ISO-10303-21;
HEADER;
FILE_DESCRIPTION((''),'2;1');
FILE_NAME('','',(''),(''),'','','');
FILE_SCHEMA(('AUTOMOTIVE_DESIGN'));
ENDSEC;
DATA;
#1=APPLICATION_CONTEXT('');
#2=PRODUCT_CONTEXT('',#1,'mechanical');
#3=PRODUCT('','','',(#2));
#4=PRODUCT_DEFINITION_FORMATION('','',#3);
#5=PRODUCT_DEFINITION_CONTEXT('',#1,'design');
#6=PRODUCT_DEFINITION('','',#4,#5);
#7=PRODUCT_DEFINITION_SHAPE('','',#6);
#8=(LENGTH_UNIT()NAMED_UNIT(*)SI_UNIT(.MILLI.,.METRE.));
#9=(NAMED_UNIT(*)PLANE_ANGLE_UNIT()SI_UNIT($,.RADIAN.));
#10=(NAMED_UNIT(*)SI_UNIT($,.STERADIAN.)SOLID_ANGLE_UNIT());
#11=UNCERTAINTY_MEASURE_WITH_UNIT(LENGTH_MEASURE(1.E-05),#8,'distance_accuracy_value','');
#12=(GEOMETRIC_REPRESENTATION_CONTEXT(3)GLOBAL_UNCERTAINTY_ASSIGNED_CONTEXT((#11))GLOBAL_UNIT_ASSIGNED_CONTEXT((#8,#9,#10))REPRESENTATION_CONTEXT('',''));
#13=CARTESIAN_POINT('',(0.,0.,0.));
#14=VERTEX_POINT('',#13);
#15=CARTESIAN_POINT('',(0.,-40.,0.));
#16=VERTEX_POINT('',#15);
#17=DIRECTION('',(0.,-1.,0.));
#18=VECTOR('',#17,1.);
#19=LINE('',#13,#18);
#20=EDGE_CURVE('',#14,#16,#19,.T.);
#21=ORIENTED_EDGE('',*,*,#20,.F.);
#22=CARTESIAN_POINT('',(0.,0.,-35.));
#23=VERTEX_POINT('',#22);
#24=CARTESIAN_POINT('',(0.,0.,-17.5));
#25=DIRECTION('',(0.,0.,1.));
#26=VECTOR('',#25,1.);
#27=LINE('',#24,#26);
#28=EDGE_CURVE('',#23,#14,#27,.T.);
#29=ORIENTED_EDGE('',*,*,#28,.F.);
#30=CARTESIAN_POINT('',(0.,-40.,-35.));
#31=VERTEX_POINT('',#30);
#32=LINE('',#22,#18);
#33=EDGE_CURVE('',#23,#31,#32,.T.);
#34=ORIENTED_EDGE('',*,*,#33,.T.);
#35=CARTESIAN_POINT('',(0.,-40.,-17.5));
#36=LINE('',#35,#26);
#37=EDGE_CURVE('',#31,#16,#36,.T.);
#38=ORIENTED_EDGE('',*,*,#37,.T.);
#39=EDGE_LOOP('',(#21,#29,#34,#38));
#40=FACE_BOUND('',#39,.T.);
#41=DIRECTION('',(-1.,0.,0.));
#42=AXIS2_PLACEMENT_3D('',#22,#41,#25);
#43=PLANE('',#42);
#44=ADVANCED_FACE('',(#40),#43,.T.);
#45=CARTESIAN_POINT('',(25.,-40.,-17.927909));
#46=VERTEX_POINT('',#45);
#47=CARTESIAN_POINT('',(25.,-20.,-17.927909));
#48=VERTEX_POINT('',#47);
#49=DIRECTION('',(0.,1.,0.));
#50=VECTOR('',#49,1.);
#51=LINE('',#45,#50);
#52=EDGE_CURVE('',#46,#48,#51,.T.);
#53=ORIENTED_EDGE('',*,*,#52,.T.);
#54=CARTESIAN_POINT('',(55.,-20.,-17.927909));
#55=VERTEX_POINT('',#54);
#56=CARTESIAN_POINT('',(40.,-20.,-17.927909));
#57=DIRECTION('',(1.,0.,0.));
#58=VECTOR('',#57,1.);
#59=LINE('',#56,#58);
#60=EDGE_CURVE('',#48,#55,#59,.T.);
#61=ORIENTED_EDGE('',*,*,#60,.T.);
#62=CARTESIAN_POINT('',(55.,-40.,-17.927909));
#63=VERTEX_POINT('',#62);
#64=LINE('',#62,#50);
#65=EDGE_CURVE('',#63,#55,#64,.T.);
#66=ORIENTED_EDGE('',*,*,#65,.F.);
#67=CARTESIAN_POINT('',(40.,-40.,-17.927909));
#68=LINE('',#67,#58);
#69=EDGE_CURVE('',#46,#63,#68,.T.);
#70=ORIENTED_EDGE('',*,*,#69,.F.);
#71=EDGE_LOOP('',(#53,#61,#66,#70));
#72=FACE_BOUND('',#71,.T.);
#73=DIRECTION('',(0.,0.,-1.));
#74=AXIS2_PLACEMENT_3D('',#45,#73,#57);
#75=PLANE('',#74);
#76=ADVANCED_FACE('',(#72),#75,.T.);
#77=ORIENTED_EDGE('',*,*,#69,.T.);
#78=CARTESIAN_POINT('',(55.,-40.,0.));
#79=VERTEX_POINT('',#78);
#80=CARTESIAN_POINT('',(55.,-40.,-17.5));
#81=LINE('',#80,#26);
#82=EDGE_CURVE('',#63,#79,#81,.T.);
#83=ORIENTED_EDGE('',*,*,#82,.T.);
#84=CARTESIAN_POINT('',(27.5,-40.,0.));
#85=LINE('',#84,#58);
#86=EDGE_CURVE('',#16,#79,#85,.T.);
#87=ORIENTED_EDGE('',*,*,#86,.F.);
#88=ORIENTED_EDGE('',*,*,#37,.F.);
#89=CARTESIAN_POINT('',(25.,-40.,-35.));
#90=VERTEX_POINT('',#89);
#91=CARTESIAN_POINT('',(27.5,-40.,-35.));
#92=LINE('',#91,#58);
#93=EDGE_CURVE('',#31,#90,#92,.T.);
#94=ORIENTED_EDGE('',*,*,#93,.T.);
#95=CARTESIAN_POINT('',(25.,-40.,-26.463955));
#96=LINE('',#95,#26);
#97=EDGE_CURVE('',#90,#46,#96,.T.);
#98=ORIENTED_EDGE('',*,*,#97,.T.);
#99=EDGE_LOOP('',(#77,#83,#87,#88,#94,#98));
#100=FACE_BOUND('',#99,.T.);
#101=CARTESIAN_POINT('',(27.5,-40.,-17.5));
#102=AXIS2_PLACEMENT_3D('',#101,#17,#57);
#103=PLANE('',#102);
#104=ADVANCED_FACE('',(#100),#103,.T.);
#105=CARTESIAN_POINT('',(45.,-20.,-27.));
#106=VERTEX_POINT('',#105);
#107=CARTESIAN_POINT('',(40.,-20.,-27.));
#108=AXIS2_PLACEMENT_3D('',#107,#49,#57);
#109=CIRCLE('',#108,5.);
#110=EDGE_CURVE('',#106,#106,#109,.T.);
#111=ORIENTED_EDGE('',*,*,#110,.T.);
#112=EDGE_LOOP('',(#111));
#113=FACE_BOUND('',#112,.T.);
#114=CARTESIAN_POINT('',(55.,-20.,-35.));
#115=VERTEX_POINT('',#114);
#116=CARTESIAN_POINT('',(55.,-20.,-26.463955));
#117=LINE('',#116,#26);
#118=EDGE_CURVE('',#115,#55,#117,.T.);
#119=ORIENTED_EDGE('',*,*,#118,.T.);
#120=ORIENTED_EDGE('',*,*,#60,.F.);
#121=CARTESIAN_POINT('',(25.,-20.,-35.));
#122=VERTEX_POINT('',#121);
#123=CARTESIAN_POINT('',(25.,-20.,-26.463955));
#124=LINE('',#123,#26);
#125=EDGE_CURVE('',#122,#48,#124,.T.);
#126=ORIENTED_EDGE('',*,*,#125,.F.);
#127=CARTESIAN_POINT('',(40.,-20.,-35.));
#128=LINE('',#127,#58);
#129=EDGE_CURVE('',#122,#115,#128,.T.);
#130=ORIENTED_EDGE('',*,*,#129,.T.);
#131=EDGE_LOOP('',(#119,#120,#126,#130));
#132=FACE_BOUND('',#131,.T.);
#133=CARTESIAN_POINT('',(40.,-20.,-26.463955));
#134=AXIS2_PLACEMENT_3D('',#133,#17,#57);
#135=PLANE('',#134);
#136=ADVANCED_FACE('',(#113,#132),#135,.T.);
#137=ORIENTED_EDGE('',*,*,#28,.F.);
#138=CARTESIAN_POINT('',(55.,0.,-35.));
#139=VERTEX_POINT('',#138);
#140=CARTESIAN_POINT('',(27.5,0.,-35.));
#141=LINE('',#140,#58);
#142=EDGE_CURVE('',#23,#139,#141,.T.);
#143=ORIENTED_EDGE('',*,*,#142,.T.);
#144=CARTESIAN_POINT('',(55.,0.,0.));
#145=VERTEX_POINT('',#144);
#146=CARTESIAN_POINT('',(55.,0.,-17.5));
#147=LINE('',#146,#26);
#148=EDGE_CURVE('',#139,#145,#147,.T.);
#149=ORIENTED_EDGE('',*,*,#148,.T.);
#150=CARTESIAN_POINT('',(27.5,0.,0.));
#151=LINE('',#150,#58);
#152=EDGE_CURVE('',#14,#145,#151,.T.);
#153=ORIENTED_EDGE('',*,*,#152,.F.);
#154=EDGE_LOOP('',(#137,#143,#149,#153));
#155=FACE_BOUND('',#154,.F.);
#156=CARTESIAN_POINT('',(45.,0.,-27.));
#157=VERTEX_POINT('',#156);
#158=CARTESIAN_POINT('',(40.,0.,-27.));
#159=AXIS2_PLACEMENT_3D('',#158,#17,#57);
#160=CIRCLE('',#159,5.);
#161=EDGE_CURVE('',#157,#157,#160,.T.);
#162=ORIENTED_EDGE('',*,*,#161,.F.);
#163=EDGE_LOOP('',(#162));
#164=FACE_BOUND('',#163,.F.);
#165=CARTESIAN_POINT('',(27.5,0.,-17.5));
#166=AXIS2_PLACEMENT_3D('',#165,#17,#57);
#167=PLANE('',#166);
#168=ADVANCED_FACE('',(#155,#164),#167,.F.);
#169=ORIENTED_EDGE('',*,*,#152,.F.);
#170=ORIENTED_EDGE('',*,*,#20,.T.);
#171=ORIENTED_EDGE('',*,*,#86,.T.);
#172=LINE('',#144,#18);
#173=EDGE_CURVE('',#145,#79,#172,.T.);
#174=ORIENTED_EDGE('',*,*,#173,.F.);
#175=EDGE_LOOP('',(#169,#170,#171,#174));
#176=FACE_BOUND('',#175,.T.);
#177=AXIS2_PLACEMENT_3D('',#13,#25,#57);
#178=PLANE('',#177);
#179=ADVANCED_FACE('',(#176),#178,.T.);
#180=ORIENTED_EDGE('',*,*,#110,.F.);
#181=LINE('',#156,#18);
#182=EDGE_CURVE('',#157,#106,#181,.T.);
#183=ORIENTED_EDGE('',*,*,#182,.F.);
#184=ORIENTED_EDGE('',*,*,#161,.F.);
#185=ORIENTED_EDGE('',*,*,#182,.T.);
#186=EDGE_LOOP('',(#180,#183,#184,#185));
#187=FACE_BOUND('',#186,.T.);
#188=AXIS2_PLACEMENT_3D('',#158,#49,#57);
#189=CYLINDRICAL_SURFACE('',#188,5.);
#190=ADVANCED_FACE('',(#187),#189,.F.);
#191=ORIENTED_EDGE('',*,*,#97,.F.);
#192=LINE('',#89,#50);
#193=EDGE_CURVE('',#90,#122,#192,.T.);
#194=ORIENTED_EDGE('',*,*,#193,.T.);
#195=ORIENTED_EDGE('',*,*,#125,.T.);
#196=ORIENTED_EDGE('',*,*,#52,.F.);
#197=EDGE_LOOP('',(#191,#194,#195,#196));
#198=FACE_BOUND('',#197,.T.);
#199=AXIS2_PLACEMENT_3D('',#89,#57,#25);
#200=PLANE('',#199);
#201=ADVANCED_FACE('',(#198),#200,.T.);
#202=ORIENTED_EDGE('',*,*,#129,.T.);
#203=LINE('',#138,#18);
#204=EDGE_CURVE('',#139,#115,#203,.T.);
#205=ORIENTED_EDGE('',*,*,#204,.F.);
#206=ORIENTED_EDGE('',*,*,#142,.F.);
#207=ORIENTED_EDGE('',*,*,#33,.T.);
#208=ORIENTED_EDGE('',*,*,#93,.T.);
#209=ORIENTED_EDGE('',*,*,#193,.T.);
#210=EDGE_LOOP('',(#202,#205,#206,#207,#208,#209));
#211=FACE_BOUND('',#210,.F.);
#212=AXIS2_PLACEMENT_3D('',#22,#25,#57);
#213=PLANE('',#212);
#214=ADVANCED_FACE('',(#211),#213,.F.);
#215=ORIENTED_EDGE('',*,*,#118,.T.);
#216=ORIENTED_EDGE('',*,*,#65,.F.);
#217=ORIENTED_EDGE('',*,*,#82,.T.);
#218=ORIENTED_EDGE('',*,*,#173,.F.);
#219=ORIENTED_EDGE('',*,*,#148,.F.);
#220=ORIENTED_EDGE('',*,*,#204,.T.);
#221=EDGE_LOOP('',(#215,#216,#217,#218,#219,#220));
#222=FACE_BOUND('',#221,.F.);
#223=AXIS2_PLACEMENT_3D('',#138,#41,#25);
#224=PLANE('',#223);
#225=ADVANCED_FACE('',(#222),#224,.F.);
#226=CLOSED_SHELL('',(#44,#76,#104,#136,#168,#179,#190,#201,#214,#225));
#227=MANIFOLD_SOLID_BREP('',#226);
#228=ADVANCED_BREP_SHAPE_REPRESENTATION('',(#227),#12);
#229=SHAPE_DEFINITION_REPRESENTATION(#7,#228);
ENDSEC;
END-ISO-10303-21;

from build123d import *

# Parameters (mm, degrees)
F0_W     = 55
F0_H     = 35
F1_DEPTH = 40
F2_W     = 30
F2_H     = 17.0720907301
F3_DEPTH = 20
F4_R     = 5
F5_DEPTH = 40.001


# Not quite as in the source:
# - a feature names something its author has since deleted; it is built from what else it names


with BuildPart() as f1:
    # F0 (on Front) → F1 (new body)
    with BuildSketch(Plane.XZ):
        with Locations((27.5, -17.5)):
            Rectangle(F0_W, F0_H)
    extrude(amount=F1_DEPTH)

    # F2 (on face) → F3 (cut)
    with BuildSketch(Plane.XZ.offset(40)):
        with Locations((40, -26.463954635)):
            Rectangle(F2_W, F2_H)
    extrude(amount=-F3_DEPTH, mode=Mode.SUBTRACT)

    # F4 (on Front) → F5 (cut, through all)
    with BuildSketch(Plane.XZ):
        with Locations((40, -27)):
            Circle(F4_R)
    extrude(amount=F5_DEPTH, mode=Mode.SUBTRACT)


solid = f1.part
